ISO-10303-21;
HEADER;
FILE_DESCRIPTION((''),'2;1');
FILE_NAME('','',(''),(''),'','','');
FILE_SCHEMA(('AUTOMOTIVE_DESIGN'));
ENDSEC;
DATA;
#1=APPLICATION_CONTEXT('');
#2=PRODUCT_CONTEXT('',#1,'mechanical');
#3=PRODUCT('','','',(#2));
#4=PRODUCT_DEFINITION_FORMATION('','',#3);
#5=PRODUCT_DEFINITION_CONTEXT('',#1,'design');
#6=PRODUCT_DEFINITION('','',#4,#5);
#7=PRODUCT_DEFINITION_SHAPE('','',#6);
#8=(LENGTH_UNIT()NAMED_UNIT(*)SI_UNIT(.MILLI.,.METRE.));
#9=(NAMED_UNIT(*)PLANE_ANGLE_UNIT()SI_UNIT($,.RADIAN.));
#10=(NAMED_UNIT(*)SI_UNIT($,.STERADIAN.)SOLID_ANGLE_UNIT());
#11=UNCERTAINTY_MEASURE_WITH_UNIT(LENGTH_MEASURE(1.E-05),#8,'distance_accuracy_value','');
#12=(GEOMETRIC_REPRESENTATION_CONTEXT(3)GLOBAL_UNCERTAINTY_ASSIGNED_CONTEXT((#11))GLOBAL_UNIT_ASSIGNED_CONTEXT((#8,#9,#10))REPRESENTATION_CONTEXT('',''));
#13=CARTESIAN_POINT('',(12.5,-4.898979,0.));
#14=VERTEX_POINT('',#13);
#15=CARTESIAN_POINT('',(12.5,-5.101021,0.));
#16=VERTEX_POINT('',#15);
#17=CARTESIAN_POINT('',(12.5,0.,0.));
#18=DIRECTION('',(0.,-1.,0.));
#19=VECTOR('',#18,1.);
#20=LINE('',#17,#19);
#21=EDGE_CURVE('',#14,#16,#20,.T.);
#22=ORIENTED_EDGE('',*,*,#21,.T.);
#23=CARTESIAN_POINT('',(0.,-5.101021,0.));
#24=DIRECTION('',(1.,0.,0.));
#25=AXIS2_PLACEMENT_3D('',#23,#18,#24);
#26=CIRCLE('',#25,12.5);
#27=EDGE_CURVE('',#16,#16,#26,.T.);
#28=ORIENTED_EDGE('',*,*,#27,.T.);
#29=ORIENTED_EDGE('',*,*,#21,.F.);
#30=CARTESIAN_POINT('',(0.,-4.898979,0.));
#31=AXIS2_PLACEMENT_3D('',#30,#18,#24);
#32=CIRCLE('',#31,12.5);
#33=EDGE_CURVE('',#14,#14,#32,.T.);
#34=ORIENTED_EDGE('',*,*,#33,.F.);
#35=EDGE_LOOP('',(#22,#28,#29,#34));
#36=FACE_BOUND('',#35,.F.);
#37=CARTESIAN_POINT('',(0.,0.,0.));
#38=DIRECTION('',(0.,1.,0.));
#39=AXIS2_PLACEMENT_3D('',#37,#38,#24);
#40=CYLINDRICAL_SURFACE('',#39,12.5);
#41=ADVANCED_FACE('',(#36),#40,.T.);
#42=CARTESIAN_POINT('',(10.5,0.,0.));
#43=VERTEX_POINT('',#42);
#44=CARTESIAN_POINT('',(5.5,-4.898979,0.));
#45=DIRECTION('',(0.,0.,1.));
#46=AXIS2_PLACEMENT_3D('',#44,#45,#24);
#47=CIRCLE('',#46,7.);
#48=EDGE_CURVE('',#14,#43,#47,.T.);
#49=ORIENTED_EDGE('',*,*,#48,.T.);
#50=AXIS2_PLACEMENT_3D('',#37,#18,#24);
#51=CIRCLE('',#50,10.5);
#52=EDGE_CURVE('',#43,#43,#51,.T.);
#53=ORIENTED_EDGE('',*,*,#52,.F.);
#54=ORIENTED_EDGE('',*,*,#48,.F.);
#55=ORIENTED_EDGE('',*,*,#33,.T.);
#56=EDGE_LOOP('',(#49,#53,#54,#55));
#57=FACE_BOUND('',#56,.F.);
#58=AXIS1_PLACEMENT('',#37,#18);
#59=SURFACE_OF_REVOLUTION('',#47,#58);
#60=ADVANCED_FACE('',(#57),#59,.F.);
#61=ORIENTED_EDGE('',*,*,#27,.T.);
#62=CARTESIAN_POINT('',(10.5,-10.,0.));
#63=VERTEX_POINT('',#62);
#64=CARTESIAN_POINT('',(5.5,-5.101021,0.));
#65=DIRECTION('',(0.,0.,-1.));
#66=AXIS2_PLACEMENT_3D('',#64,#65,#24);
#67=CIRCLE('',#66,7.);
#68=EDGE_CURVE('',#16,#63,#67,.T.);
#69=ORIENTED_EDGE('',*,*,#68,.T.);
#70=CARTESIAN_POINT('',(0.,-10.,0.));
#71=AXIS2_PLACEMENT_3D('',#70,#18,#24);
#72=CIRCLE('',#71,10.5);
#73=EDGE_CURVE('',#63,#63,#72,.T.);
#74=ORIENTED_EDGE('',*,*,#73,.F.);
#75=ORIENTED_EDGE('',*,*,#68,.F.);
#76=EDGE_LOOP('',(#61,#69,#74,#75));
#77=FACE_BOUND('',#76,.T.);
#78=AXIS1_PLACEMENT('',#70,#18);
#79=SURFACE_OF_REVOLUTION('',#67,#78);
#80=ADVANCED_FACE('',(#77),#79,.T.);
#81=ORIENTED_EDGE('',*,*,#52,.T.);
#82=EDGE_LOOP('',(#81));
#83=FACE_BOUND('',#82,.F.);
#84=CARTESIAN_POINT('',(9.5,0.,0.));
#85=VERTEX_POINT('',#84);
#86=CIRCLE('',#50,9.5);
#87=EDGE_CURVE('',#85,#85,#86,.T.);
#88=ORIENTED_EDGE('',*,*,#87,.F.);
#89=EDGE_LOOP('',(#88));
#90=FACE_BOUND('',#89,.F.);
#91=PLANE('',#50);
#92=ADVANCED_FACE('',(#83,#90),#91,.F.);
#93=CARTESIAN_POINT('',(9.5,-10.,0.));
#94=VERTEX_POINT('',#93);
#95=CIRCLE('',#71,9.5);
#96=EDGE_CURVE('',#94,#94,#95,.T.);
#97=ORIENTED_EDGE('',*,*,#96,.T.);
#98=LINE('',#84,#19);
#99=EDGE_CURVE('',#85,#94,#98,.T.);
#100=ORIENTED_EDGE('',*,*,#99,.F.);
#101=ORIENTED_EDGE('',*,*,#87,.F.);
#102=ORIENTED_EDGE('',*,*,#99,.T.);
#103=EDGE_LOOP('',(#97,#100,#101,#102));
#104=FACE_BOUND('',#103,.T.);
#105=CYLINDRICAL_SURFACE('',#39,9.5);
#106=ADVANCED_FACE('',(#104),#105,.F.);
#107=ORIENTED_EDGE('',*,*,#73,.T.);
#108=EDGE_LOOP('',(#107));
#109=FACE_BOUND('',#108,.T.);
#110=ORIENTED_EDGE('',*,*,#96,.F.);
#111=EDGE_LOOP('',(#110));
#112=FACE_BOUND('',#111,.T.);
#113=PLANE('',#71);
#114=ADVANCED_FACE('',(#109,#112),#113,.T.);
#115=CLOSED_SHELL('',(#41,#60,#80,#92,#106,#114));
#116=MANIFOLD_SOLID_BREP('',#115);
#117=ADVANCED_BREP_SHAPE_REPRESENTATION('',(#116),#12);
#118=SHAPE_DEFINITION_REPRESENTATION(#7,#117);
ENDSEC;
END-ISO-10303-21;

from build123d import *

# Parameters (mm, degrees)
F0_R     = 12.5
F0_R_2   = 10.5
F1_DEPTH = 10
F0_R_3   = 9.5
F3_DEPTH = 10


# Not quite as in the source:
# - a fillet or chamfer that OpenCascade refuses, or shapes differently, is made with other operations: its cross-section is extruded or revolved along the edge and cut away or added


with BuildPart() as f1:
    # F0 (on Front) → F1 (new body)
    with BuildSketch(Plane.XZ):
        Circle(F0_R)
        Circle(F0_R_2, mode=Mode.SUBTRACT)
    extrude(amount=F1_DEPTH)

    # F2: fillet of radius 7 on 3 edges, made by hand

    # F2_s1 → F2_t2 (revolve, cut)
    with BuildSketch(Plane.XY):
        with BuildLine():
            ThreePointArc((12.5, -4.8989794856), (11.9807406984, -2.2532281745), (10.5, 0))
            Line((10.5, 0), (10.6, 0.0979795897))
            ThreePointArc((10.6, 0.0979795897), (11.5, 0.14), (12.5, 0.14))
            Line((12.5, 0.14), (12.64, 0))
            Line((12.64, 0), (12.64, -4.8989794856))
            Line((12.64, -4.8989794856), (12.5, -4.8989794856))
        make_face()
    revolve(axis=Axis((0, 0, 0), (0, -1, 0)), mode=Mode.SUBTRACT)

    # F2_s3 → F2_t4 (revolve, cut)
    with BuildSketch(Plane.XY):
        with BuildLine():
            ThreePointArc((12.5, -5.1010205144), (11.9807406984, -7.7467718255), (10.5, -10))
            Line((10.5, -10), (10.6, -10.0979795897))
            ThreePointArc((10.6, -10.0979795897), (11.5, -10.14), (12.5, -10.14))
            Line((12.5, -10.14), (12.64, -10))
            Line((12.64, -10), (12.64, -5.1010205144))
            Line((12.64, -5.1010205144), (12.5, -5.1010205144))
        make_face()
    revolve(axis=Axis((0, -10, 0), (0, -1, 0)), mode=Mode.SUBTRACT)

    # F0 (on Front) → F3 (join)
    with BuildSketch(Plane.XZ):
        Circle(F0_R_2)
        Circle(F0_R_3, mode=Mode.SUBTRACT)
    extrude(amount=F3_DEPTH)


solid = f1.part
